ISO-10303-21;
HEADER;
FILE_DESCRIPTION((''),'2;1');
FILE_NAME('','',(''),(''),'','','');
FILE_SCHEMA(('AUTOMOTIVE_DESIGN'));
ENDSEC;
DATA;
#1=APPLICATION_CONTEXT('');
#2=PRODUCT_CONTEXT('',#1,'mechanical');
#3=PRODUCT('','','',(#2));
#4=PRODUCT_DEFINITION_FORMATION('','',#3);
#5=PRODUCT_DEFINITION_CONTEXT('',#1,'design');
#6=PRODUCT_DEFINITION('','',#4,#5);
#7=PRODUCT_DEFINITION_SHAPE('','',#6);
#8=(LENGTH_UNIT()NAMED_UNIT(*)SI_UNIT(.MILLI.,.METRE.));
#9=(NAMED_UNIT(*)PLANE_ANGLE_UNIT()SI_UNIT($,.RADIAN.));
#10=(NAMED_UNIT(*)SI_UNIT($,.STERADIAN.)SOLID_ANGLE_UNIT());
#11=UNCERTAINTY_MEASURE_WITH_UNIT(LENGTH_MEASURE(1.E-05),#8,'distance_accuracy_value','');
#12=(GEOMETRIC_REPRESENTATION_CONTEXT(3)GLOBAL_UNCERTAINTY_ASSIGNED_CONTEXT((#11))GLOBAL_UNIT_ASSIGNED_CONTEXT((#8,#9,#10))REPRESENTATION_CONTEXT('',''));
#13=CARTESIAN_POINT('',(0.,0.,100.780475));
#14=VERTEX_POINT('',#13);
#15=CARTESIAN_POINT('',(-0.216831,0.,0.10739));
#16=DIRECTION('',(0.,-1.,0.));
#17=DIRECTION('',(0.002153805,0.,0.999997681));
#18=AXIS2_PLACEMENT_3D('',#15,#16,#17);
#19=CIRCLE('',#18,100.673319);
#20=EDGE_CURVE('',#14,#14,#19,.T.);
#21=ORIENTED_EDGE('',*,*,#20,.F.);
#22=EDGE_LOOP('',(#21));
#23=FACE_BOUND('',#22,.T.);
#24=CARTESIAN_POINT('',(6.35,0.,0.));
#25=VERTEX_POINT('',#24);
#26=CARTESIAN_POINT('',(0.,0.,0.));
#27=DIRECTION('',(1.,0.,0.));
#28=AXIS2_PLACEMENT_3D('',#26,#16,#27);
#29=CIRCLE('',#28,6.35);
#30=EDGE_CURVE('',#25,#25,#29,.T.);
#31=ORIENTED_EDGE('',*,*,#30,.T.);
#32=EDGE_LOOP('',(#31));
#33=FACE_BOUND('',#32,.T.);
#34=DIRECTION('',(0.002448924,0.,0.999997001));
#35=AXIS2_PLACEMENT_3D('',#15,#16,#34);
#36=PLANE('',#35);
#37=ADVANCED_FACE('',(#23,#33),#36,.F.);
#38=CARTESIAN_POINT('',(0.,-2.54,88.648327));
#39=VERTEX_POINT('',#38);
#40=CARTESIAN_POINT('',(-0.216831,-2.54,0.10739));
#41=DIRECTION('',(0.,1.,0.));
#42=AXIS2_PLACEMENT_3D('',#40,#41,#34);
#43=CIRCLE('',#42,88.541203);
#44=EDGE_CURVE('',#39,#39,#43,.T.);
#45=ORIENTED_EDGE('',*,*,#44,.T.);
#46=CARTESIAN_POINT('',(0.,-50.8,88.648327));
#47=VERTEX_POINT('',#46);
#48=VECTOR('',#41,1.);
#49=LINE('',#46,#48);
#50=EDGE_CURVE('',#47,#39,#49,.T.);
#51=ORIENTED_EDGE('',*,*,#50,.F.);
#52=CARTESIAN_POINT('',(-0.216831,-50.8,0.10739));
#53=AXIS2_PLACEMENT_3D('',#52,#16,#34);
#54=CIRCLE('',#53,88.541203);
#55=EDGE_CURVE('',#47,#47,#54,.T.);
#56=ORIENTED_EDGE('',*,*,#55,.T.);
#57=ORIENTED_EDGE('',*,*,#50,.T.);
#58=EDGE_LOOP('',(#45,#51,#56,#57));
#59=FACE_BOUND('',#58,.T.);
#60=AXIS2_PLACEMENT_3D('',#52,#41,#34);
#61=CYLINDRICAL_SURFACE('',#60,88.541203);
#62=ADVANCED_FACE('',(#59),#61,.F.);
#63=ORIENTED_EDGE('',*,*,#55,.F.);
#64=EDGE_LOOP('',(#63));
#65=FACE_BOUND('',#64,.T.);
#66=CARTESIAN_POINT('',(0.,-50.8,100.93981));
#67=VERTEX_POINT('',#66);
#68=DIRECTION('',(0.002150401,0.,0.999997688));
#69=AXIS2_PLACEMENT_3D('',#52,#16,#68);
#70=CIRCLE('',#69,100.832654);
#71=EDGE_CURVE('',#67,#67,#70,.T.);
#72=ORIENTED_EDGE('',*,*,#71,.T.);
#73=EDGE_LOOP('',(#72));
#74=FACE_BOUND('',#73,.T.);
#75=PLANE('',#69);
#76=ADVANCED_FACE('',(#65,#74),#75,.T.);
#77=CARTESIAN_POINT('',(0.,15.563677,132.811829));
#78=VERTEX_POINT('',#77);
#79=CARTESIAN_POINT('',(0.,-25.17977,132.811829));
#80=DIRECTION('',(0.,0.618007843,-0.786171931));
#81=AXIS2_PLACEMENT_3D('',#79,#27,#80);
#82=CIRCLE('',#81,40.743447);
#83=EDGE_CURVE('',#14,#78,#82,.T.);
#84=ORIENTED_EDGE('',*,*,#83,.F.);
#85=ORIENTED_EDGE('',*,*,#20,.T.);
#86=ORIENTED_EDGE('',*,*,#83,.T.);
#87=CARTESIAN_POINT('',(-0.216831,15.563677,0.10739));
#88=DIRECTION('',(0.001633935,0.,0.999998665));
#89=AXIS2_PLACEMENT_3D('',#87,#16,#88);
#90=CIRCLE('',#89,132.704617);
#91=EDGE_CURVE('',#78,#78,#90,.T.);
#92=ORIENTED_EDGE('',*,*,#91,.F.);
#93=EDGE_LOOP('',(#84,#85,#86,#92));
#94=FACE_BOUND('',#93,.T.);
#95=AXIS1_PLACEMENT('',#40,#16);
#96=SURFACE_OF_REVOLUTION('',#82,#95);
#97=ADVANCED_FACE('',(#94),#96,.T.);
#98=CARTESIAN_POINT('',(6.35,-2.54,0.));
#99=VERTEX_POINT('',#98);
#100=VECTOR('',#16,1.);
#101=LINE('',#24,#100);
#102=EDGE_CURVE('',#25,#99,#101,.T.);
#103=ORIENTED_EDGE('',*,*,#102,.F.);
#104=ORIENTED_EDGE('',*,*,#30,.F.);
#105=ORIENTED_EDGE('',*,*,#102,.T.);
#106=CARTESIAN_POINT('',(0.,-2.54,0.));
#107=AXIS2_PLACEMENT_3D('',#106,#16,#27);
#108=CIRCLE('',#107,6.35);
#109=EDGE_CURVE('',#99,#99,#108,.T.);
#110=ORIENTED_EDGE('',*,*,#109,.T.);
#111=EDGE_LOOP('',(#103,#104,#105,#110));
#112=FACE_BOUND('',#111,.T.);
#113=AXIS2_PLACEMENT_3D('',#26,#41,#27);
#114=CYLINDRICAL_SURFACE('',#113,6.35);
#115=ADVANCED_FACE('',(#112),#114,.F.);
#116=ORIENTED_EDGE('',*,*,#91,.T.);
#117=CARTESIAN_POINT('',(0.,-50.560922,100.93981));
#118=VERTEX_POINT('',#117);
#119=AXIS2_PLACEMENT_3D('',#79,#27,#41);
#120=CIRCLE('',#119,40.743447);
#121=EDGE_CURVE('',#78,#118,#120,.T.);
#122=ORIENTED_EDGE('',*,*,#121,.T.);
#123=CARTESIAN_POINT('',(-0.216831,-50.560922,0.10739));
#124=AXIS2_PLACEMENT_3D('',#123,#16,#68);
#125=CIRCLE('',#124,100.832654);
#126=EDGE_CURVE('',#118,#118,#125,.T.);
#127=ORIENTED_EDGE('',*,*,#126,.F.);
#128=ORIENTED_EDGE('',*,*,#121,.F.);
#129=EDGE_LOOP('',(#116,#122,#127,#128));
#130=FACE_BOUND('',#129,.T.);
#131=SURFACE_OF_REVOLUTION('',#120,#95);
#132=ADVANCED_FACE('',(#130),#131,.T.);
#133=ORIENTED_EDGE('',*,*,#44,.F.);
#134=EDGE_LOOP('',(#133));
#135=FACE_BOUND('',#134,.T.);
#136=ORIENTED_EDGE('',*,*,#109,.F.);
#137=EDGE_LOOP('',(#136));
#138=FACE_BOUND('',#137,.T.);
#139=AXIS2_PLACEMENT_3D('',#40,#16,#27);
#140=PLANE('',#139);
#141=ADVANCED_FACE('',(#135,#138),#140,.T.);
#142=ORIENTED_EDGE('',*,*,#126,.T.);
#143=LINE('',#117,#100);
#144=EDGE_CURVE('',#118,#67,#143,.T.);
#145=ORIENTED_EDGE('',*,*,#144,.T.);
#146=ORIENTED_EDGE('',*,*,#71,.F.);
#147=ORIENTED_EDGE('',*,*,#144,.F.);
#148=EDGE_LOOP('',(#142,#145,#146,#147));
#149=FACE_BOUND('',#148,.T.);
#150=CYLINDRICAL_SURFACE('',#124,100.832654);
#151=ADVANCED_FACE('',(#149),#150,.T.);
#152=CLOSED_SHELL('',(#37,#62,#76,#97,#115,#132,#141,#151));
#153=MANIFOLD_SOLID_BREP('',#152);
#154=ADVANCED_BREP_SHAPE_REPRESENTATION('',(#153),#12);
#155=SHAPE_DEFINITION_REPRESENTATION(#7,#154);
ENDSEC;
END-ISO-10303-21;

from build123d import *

# Parameters (mm, degrees)
F0_R     = 88.9
F0_R_2   = 6.35
F1_DEPTH = 2.54


with BuildPart() as f1:
    # F0 (on Front) → F1 (new body)
    with BuildSketch(Plane.XZ):
        with Locations((-0.2168306673, 0.1073895255)):
            Circle(F0_R)
        Circle(F0_R_2, mode=Mode.SUBTRACT)
    extrude(amount=F1_DEPTH)

    # F2 (on Right) → F3 (revolve)
    with BuildSketch(Plane.YZ):
        with BuildLine():
            Line((-50.5609217677, 100.939810276), (-50.8, 100.939810276))
            Line((-50.8, 100.939810276), (-50.8, 88.648326695))
            Line((-50.8, 88.648326695), (0, 88.648326695))
            Line((0, 88.648326695), (0, 100.78047497))
            ThreePointArc((0, 100.78047497), (-25.3081661852, 92.0685846893), (-50.5609217677, 100.939810276))
        make_face()
        with BuildLine():
            ThreePointArc((15.5636772252, 132.8118294477), (-42.8703444402, 169.5143096026), (-50.5609217677, 100.939810276))
            Line((-50.5609217677, 100.939810276), (0, 100.939810276))
            Line((0, 100.939810276), (0, 100.78047497))
            ThreePointArc((0, 100.78047497), (11.4667790995, 115.0056808015), (15.5636772252, 132.8118294477))
        make_face()
        with BuildLine():
            Line((0, 100.939810276), (-50.5609217677, 100.939810276))
            ThreePointArc((-50.5609217677, 100.939810276), (-25.3081661852, 92.0685846893), (0, 100.78047497))
            Line((0, 100.78047497), (0, 100.939810276))
        make_face()
    revolve(axis=Axis((-0.2168306673, -2.54, 0.1073895255), (0, -1, 0)))


solid = f1.part
